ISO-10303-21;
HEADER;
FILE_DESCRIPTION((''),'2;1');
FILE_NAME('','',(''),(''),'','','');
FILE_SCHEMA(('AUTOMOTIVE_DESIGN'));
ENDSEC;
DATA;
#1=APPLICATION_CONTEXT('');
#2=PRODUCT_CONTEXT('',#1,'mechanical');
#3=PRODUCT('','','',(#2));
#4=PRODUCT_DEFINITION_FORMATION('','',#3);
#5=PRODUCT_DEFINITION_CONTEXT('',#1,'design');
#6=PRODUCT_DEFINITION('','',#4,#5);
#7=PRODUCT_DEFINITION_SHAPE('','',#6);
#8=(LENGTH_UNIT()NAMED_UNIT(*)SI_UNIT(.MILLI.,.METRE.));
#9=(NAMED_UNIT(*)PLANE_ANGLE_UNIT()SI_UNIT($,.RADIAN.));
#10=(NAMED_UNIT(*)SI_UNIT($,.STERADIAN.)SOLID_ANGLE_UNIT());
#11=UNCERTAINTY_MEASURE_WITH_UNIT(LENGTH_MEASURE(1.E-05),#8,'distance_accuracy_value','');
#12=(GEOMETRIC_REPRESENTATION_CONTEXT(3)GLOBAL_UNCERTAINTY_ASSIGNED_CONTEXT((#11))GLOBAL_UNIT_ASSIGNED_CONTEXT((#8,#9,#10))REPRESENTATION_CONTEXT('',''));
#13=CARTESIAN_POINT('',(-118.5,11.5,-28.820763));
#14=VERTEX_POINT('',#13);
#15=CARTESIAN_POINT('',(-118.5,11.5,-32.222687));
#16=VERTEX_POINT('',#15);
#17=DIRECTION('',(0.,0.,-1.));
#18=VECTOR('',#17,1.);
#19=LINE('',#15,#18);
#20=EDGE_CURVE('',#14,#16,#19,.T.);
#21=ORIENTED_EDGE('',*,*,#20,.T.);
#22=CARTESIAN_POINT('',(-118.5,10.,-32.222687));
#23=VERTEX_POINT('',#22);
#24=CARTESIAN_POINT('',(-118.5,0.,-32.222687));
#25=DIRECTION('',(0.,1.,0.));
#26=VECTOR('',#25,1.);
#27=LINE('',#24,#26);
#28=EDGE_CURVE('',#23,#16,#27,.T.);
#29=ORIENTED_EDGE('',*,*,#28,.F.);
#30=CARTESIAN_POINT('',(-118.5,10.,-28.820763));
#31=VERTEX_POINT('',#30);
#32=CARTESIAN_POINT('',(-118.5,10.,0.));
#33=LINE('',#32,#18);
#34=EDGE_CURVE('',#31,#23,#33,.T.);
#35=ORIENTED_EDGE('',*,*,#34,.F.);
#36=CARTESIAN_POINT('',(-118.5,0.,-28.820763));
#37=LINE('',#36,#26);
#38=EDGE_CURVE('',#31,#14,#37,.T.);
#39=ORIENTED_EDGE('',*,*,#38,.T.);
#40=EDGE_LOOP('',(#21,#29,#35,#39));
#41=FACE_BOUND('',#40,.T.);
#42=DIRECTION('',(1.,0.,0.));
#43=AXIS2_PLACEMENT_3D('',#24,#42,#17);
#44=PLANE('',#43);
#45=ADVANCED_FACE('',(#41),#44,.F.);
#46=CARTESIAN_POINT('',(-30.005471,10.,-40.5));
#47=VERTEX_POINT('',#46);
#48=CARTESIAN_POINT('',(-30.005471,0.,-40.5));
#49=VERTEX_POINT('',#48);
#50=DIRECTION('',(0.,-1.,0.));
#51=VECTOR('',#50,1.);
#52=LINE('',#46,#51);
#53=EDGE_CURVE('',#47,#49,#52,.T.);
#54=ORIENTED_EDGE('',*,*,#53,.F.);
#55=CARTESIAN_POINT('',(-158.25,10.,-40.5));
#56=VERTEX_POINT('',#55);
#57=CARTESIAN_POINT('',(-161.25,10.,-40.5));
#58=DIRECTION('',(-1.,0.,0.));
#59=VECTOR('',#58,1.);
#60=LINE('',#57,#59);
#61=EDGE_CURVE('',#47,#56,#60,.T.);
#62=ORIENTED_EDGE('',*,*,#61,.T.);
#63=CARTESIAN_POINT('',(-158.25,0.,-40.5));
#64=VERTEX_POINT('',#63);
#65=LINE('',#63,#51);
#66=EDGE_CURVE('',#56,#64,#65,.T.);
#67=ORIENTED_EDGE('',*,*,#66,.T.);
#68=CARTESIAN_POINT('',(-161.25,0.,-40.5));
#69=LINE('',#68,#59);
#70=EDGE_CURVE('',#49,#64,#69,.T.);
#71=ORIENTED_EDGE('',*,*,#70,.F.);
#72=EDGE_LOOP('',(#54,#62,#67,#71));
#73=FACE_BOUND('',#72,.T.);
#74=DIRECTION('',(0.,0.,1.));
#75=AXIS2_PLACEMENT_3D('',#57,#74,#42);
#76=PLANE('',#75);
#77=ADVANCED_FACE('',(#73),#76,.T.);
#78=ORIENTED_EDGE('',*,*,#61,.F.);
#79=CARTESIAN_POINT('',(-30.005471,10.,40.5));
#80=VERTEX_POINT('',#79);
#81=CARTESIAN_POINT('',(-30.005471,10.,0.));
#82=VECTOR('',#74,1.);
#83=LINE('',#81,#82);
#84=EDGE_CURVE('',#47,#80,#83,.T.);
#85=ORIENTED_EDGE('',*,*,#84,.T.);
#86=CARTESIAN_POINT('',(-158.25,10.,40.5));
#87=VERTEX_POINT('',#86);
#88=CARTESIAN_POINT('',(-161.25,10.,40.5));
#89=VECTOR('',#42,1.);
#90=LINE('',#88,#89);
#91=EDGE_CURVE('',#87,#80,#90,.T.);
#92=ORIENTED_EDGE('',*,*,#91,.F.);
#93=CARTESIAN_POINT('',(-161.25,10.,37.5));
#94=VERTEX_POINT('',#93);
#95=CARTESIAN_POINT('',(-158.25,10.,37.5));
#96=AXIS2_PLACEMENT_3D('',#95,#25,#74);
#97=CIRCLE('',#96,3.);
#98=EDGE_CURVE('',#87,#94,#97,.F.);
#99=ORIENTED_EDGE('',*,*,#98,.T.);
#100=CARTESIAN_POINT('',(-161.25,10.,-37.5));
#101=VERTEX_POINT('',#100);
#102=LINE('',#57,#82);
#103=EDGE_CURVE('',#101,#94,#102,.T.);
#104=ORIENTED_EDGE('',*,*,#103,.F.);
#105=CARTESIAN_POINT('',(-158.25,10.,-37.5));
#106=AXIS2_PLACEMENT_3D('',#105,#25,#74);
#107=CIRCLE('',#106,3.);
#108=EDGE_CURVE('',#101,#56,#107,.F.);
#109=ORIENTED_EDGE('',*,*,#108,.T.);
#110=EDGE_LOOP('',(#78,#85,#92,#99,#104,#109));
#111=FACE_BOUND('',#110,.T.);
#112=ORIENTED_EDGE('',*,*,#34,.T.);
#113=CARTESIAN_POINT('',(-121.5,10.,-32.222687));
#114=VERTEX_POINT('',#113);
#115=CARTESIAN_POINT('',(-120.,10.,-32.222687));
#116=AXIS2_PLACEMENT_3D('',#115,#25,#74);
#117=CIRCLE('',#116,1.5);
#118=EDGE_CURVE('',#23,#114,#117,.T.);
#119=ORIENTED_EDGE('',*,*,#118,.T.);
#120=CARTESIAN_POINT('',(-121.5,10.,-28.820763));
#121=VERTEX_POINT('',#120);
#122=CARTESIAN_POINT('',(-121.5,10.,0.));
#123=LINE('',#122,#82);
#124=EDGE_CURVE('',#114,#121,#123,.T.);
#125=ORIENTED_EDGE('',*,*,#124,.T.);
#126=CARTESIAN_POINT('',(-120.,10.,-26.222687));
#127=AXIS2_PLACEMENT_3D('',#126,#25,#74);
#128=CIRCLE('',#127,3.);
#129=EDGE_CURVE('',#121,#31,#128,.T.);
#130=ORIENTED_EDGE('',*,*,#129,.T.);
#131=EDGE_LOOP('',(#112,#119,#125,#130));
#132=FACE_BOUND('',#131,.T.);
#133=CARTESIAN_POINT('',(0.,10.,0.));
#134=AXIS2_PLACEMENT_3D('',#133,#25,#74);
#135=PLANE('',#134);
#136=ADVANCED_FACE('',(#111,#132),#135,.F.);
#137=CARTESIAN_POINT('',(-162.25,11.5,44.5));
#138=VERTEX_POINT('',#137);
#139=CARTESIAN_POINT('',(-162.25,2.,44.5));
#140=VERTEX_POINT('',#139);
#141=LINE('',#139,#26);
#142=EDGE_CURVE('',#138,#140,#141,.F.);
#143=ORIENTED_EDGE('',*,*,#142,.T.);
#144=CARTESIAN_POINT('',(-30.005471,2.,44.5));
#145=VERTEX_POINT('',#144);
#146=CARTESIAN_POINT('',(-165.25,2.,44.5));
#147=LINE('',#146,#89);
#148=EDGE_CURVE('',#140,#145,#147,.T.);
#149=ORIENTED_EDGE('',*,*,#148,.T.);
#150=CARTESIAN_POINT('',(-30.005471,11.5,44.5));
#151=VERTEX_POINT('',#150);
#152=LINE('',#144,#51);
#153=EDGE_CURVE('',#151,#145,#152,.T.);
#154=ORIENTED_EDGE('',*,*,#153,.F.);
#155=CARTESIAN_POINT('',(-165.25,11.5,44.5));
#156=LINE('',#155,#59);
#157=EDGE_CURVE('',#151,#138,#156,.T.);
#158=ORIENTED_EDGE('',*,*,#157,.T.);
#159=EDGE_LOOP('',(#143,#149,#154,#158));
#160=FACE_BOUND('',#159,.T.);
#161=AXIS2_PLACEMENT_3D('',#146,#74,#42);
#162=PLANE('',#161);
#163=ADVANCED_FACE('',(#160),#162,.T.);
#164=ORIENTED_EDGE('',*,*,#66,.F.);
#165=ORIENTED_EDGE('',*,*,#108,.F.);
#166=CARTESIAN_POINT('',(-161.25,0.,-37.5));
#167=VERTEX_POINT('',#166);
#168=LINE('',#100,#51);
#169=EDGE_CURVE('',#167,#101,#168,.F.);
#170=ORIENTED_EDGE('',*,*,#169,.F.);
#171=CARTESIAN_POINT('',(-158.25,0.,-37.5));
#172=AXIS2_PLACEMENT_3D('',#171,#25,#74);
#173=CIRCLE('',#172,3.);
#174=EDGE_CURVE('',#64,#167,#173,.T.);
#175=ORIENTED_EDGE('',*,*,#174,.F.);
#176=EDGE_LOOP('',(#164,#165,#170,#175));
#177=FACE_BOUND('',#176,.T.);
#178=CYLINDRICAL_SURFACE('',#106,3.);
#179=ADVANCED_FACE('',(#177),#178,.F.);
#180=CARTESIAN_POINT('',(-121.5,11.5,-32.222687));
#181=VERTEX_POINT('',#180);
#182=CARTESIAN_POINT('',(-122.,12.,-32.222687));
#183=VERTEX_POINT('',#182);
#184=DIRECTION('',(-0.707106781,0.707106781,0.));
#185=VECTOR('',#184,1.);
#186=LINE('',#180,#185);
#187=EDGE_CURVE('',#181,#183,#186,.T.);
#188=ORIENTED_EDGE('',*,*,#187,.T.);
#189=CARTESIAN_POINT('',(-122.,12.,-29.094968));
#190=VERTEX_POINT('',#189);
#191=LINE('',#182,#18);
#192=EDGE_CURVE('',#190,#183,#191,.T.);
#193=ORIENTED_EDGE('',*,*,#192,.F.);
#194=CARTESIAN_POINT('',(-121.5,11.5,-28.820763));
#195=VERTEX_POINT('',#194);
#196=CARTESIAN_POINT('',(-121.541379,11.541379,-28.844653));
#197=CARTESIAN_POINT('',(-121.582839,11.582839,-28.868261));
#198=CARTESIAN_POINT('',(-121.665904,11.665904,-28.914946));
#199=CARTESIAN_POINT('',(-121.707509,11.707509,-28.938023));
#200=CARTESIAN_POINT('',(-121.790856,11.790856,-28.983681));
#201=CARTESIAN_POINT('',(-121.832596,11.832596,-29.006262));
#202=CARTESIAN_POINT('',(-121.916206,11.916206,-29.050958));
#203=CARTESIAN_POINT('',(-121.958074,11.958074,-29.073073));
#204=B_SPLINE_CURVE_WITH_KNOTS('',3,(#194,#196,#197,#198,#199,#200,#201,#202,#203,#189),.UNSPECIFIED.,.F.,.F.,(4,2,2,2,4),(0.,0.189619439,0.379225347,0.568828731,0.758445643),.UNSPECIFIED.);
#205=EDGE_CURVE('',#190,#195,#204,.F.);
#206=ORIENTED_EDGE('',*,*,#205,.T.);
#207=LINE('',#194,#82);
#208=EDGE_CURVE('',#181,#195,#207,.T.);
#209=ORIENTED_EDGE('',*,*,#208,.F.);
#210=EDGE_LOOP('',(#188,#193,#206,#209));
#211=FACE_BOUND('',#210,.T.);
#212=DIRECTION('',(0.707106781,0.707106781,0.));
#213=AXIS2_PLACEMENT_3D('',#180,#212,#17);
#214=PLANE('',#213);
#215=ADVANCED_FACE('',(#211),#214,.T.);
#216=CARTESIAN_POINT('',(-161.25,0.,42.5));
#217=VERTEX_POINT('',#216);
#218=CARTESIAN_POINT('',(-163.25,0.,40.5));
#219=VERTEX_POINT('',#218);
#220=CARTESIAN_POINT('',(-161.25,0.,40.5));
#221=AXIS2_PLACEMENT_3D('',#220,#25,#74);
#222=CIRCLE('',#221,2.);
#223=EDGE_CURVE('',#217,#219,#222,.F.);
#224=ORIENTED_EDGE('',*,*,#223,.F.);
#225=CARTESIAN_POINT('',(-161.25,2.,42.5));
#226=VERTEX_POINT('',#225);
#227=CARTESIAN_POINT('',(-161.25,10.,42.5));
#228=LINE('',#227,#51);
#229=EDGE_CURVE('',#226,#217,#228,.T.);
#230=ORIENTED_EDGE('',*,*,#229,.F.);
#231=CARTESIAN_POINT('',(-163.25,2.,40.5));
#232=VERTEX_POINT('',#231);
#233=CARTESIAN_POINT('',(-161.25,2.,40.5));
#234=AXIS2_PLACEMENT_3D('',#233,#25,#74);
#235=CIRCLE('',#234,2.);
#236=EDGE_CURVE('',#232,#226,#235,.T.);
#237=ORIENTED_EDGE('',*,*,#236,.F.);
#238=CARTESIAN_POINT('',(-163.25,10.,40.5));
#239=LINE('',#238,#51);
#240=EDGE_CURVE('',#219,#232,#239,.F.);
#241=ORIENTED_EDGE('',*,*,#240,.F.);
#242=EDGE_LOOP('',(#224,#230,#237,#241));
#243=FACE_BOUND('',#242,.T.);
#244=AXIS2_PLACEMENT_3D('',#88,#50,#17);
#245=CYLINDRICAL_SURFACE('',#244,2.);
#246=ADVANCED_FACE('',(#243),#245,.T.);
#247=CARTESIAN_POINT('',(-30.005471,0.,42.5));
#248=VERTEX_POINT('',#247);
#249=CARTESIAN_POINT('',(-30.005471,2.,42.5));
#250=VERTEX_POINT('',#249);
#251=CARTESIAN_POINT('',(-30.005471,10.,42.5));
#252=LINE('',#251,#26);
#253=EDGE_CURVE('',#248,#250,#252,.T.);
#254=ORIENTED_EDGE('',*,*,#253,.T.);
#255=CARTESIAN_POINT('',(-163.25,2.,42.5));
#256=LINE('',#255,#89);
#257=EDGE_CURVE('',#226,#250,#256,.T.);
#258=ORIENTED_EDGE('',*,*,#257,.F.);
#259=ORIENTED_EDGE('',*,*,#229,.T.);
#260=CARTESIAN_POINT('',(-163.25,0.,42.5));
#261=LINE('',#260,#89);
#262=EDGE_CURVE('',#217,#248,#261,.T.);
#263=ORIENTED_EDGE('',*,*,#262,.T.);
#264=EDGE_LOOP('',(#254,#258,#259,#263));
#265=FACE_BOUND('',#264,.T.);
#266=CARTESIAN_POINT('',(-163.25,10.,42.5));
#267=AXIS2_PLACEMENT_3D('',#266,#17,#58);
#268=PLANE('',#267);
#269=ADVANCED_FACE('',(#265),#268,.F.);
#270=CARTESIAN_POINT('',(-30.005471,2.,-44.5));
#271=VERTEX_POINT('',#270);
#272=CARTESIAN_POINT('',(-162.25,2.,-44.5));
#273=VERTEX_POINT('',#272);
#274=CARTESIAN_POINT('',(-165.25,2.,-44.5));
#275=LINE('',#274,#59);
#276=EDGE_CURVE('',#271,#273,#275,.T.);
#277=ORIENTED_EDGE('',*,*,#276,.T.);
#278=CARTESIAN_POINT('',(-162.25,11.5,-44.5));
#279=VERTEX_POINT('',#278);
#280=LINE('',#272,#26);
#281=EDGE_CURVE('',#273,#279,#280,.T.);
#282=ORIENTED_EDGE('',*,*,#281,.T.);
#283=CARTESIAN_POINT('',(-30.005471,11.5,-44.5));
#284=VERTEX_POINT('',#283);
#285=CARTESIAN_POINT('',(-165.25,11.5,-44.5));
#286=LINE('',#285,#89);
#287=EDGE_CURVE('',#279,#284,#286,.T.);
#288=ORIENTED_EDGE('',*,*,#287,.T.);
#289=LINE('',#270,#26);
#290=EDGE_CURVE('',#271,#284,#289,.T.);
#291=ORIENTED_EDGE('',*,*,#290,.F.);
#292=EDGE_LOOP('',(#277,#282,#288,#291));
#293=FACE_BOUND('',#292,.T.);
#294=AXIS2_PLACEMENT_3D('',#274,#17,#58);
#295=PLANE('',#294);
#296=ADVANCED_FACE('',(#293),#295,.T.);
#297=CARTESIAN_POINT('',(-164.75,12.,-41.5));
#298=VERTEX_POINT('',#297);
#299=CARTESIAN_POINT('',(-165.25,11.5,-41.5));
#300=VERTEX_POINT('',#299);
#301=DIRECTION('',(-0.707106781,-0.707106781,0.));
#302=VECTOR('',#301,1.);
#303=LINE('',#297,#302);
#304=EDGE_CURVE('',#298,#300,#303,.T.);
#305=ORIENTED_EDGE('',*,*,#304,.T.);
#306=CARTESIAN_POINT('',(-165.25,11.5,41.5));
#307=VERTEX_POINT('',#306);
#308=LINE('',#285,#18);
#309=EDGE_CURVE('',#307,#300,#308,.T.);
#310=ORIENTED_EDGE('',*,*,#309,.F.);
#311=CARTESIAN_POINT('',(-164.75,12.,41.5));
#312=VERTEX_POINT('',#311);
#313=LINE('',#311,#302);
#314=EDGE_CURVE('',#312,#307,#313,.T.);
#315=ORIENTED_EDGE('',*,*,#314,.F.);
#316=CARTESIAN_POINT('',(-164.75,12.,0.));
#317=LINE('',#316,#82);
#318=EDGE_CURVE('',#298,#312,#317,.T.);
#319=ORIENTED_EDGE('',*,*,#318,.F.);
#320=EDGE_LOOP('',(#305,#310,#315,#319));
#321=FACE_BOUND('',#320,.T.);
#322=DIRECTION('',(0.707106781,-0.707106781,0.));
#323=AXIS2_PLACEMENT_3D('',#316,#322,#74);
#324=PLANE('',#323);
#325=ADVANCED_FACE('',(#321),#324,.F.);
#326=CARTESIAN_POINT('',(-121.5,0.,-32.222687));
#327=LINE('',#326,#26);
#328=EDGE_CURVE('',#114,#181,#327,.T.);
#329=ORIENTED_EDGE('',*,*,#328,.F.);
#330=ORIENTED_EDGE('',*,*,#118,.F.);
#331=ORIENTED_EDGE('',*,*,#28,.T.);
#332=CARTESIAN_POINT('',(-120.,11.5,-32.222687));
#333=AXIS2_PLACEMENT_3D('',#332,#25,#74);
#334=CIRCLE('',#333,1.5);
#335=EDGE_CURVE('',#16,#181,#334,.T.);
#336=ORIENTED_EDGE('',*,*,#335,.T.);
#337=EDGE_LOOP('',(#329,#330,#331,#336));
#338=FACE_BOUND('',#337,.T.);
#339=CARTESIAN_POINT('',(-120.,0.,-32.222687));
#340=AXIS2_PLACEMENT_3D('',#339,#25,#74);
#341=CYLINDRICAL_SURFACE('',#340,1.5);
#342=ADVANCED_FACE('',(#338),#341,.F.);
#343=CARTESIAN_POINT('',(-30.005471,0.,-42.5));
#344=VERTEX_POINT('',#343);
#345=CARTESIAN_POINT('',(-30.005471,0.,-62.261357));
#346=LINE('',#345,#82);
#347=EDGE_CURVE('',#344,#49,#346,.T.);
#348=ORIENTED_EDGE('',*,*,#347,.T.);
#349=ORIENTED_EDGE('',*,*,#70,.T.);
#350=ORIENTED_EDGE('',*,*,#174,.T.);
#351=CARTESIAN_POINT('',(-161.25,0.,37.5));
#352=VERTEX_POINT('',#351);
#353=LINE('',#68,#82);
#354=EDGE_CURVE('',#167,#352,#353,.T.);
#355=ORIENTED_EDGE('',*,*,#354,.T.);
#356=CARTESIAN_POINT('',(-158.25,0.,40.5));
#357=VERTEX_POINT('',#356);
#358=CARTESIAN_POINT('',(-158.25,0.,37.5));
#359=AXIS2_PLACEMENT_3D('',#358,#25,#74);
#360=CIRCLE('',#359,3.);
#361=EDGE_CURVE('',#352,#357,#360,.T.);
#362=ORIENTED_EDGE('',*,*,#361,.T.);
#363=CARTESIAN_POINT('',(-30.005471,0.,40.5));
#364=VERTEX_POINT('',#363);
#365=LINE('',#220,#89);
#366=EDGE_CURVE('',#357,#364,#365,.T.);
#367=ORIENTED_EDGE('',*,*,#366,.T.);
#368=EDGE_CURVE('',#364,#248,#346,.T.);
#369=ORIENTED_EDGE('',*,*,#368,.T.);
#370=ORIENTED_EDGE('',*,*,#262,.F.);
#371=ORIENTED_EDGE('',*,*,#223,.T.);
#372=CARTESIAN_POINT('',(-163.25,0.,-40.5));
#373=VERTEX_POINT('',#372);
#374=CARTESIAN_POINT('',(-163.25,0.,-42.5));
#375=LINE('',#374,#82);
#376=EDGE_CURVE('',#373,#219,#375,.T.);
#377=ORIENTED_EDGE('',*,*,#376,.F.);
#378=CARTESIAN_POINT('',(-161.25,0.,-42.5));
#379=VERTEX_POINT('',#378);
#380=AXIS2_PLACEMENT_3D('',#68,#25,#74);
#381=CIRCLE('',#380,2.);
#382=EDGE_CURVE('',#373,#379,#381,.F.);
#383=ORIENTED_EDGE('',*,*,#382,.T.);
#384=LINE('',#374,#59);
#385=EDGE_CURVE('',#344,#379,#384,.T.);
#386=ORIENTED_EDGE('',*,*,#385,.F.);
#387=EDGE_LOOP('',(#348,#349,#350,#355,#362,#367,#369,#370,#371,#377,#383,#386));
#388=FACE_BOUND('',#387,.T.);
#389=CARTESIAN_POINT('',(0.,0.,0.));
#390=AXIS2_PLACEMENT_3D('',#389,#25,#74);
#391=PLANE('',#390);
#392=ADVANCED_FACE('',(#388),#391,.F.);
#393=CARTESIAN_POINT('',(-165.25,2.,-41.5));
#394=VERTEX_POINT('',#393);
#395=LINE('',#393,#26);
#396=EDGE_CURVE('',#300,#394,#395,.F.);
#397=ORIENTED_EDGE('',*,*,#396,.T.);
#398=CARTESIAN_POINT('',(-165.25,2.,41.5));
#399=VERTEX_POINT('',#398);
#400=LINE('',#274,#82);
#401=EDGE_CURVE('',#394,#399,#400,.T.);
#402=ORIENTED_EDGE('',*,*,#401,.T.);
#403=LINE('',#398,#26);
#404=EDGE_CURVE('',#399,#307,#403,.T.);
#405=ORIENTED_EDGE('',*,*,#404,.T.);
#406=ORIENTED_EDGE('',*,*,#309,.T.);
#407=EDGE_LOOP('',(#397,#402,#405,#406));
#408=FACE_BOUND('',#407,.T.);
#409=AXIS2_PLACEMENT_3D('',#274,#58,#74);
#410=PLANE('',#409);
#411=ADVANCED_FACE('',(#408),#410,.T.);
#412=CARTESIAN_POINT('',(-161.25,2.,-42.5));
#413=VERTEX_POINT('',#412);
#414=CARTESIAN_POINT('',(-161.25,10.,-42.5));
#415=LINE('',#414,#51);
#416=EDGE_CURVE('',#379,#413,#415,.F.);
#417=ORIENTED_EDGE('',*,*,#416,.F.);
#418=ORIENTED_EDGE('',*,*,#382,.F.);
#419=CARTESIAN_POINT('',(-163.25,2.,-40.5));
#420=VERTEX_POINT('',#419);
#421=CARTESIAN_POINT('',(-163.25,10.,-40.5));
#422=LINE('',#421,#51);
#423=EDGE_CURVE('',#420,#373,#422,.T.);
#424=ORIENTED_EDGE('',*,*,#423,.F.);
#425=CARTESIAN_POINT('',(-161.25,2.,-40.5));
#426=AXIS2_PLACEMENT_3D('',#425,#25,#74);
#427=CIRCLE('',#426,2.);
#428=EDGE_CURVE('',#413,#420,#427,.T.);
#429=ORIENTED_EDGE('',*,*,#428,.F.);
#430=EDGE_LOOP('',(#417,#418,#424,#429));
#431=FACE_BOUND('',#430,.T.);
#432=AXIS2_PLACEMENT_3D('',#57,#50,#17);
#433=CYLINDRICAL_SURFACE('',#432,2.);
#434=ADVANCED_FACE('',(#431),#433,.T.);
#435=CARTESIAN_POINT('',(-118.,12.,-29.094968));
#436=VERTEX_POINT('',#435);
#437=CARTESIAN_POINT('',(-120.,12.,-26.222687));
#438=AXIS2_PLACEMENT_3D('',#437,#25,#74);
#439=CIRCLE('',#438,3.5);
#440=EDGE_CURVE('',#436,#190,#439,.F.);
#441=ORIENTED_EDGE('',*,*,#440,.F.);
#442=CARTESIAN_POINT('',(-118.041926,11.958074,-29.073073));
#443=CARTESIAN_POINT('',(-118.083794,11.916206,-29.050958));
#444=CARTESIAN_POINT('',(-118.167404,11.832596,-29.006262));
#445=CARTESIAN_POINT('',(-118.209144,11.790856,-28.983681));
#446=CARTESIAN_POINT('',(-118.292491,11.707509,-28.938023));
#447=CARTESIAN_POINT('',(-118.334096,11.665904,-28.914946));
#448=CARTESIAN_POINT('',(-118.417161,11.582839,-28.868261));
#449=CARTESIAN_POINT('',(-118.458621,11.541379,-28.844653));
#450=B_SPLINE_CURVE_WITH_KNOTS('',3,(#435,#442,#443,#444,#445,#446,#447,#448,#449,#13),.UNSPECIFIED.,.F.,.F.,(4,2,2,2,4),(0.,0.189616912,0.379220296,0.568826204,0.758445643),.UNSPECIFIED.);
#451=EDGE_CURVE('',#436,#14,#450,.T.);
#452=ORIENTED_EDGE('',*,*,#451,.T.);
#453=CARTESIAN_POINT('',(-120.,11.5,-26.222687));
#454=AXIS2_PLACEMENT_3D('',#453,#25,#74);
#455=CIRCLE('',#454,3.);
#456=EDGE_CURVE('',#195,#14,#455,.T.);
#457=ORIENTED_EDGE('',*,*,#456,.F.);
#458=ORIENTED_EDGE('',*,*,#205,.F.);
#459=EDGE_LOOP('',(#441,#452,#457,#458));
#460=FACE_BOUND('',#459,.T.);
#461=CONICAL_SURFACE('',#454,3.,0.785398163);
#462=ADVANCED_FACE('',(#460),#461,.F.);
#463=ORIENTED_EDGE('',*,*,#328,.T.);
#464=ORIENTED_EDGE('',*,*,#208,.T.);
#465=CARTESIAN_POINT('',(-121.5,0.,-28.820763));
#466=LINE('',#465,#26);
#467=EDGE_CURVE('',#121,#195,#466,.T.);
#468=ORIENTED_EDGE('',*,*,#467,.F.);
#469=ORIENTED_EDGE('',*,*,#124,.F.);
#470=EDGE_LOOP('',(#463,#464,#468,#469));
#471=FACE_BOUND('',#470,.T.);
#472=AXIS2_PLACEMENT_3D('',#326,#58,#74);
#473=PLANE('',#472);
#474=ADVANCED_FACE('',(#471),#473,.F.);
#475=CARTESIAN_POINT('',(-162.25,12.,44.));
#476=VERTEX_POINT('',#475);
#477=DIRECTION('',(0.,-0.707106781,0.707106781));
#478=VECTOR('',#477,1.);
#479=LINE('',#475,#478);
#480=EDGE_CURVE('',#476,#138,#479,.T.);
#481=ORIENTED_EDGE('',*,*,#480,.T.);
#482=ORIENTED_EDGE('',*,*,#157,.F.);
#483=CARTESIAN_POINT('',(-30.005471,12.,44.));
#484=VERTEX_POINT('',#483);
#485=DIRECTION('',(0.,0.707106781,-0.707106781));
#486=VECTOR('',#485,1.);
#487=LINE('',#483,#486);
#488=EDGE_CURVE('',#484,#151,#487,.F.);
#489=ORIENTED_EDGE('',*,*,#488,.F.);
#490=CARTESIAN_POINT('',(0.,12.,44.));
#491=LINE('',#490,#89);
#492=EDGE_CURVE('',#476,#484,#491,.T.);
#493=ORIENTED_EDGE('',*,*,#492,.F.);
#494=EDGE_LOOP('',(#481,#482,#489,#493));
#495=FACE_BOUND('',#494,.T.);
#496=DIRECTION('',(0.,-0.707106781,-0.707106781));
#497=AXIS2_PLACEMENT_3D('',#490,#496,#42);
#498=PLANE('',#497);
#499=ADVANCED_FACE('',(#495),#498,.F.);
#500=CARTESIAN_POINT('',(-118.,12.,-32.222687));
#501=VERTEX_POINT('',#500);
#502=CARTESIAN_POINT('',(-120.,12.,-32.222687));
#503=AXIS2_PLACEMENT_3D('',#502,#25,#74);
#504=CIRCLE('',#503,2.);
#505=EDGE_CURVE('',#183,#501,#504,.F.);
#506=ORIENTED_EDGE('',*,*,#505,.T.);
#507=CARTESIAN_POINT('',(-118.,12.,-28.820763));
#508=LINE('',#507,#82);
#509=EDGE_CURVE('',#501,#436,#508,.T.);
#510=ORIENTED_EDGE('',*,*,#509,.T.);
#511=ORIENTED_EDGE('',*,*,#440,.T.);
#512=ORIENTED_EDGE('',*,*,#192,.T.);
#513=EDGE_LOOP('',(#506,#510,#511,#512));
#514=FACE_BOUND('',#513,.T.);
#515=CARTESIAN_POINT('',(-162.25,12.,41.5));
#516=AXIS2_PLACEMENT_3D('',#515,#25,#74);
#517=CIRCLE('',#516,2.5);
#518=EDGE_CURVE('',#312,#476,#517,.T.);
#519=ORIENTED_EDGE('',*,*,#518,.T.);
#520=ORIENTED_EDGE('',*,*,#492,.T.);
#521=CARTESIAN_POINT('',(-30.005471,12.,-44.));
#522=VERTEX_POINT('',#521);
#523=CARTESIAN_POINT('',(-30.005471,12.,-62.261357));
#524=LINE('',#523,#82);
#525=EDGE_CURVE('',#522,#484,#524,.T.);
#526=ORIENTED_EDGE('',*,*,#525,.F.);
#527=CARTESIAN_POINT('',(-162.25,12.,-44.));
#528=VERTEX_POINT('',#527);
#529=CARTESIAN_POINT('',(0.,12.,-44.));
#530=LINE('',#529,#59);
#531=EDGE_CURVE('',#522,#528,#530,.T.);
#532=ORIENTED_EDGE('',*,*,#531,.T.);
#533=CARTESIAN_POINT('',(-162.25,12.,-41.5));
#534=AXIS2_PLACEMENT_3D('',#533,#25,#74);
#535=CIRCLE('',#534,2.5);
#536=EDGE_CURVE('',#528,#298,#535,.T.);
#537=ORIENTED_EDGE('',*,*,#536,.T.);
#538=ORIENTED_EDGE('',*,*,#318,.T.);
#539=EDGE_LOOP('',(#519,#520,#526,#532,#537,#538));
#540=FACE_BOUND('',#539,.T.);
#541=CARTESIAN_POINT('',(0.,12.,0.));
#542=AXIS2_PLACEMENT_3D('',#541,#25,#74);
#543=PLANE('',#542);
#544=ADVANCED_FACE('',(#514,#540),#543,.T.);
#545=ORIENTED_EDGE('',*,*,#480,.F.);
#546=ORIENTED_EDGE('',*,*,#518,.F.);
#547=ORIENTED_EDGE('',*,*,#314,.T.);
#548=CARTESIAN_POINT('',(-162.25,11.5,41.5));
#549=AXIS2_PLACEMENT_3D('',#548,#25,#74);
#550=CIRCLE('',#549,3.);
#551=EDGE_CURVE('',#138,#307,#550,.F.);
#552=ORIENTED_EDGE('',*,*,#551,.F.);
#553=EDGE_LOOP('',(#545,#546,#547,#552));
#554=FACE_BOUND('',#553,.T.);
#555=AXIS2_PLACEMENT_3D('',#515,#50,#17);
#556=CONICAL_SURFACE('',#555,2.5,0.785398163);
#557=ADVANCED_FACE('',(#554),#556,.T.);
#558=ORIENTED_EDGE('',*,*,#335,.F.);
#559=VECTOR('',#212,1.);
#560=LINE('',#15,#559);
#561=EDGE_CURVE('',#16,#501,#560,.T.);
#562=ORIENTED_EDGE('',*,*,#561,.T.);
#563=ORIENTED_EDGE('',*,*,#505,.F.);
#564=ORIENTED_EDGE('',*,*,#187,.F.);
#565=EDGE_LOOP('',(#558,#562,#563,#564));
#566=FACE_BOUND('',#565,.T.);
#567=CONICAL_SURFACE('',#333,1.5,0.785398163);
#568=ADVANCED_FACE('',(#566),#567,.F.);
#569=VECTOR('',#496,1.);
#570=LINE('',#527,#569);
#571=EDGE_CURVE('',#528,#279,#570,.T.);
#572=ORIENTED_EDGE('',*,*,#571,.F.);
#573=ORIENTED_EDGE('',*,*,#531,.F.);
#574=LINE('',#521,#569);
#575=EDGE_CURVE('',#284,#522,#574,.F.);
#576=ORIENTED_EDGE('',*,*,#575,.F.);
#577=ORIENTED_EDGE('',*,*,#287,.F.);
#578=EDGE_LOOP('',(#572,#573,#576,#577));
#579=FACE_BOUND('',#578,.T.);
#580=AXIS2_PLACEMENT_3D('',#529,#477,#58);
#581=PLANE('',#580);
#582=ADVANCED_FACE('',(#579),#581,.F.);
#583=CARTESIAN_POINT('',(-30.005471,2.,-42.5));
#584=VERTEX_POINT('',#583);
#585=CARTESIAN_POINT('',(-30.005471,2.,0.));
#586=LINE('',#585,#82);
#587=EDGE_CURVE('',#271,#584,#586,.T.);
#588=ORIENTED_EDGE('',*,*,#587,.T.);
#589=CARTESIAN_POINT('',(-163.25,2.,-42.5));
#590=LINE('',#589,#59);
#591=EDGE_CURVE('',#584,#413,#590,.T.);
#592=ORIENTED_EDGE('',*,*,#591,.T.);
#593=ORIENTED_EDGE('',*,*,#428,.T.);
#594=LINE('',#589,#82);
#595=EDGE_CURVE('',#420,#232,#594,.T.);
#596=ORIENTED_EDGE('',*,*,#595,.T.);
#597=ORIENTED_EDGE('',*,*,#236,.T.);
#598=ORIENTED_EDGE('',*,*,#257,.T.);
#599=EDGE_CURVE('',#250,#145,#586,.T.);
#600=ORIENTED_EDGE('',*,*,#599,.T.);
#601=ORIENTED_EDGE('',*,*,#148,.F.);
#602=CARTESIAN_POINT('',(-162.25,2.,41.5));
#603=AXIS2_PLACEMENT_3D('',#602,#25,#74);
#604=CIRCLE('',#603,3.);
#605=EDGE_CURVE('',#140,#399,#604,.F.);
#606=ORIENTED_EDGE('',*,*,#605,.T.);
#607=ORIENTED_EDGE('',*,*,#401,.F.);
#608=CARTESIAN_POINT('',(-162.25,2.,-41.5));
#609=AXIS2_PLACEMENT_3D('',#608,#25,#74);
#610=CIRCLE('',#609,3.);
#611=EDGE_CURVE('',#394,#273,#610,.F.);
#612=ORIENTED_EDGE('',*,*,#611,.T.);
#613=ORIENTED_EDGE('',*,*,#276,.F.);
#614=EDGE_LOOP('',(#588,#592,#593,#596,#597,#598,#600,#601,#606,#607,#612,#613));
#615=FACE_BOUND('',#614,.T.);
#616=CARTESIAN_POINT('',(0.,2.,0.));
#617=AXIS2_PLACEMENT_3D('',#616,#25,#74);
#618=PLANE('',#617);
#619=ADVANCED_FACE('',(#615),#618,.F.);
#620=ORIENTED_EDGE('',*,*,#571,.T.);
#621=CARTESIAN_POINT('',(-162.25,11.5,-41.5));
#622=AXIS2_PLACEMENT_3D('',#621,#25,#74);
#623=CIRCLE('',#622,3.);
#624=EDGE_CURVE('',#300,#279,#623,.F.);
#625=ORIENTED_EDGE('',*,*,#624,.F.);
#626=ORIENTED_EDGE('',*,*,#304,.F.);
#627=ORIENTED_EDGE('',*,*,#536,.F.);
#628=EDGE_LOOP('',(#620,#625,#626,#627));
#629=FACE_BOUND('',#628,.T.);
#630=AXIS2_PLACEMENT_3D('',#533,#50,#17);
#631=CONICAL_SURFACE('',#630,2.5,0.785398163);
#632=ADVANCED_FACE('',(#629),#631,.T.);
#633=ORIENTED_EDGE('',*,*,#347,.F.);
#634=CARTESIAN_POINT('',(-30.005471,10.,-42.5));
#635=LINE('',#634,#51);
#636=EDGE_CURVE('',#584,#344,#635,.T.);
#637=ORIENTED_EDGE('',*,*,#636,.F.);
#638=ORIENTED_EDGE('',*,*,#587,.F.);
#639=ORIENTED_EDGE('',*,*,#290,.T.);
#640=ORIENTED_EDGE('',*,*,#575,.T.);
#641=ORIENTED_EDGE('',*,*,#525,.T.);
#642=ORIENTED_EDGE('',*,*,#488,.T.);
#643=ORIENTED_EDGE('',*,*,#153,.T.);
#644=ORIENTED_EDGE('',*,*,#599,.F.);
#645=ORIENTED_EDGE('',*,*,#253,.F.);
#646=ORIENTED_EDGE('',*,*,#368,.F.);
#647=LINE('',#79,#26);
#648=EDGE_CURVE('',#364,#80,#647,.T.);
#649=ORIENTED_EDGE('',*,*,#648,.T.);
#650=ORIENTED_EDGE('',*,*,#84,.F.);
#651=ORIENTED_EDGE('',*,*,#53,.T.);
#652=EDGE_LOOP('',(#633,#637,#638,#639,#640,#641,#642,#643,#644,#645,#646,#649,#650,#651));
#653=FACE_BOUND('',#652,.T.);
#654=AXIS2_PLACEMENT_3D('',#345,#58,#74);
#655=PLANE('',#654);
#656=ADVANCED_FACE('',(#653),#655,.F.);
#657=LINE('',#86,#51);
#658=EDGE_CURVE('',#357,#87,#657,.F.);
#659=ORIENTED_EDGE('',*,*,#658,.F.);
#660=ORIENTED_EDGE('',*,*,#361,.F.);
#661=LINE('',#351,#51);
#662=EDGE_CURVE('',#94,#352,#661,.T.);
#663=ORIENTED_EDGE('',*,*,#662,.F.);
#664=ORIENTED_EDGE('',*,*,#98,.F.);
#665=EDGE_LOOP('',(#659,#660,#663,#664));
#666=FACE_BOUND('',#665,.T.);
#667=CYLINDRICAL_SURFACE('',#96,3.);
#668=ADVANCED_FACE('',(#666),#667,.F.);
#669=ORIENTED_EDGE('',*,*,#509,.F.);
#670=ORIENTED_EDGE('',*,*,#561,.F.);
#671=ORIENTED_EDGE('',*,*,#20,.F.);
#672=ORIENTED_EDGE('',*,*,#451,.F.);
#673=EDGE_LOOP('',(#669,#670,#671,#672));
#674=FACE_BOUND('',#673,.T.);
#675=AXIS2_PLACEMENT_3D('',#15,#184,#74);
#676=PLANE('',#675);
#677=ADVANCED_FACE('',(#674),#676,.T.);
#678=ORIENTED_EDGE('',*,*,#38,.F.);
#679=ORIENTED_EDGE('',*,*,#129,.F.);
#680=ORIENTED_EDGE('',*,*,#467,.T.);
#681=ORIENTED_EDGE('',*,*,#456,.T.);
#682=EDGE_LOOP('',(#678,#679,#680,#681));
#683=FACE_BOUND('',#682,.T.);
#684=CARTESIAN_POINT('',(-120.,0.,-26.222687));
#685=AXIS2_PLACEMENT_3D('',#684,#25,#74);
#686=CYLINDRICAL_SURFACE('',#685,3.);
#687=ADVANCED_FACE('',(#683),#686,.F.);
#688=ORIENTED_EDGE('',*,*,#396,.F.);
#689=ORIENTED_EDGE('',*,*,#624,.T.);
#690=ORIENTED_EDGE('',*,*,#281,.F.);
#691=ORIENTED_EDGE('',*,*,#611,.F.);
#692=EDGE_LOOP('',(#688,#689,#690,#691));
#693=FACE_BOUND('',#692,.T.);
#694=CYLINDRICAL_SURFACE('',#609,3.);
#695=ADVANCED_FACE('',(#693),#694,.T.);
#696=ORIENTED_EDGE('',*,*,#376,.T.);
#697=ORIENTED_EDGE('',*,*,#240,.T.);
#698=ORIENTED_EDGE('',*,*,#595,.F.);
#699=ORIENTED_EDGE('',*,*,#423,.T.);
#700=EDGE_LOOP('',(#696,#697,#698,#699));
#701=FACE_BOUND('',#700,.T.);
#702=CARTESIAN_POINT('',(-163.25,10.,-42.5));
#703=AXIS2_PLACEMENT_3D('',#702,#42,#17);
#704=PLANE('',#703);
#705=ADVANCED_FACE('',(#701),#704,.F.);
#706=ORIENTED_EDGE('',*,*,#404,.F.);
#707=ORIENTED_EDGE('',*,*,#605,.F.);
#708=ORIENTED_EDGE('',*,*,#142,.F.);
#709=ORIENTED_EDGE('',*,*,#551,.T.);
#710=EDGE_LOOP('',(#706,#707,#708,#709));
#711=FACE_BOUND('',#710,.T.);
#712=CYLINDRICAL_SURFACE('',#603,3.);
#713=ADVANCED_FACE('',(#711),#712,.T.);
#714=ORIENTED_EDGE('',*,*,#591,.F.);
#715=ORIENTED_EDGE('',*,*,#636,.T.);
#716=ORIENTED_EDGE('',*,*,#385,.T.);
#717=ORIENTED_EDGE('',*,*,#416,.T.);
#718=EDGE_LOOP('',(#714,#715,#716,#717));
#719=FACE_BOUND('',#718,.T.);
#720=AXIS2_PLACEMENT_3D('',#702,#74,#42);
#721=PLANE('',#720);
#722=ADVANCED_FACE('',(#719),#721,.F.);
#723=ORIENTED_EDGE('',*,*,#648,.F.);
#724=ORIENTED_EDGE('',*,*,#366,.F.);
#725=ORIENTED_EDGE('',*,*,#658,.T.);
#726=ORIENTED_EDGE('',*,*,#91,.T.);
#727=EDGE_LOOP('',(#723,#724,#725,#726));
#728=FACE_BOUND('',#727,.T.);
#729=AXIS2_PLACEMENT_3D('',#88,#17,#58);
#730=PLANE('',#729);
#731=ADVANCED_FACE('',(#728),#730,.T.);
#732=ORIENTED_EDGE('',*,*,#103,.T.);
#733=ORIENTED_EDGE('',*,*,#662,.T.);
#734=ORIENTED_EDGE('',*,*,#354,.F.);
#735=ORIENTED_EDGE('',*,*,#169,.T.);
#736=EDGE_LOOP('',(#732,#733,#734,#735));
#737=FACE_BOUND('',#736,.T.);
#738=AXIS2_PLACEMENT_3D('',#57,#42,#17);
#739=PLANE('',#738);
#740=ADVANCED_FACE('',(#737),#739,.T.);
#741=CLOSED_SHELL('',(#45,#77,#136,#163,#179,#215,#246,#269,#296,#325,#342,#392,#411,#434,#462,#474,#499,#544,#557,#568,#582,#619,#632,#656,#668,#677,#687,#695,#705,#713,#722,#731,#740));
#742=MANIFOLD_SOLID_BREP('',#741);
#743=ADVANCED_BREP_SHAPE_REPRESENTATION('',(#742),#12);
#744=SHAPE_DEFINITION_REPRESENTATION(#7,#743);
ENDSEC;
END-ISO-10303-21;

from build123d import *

# Parameters (mm, degrees)
SKETCH1_W           = 326.5
SKETCH1_H           = 85
SKETCH1_W_2         = 322.5
SKETCH1_H_2         = 81
BOSS_EXTRUDE1_DEPTH = 10
SKETCH2_W           = 330.5
SKETCH2_H           = 89
SKETCH2_W_2         = 322.5
SKETCH2_H_2         = 81
BOSS_EXTRUDE2_DEPTH = 8
SKETCH3_W           = 330.5
SKETCH3_H           = 89
BOSS_EXTRUDE3_DEPTH = 2
FILLET1_R           = 3
FILLET2_R           = 2
FILLET3_R           = 3
CHAMFER1_SIZE       = 0.5
CUT_EXTRUDE1_DEPTH  = 172.557024047
CHAMFER2_SIZE       = 0.5
SKETCH7_W           = 40
SKETCH7_H           = 6.166023439
CUT_EXTRUDE3_DEPTH  = 189.075948755
BOSS_EXTRUDE4_REACH = 190.076
FILLET4_R           = 2
CHAMFER3_SIZE       = 0.5
FILLET5_R           = 3
FILLET6_R           = 2
SKETCH9_R           = 16.25
SKETCH9_R_2         = 14.25
BOSS_EXTRUDE5_DEPTH = 3
SKETCH10_R          = 1.5
SKETCH10_R_2        = 2
SKETCH10_R_3        = 2.25
CUT_EXTRUDE4_DEPTH  = 172.279924393
CHAMFER4_SIZE       = 0.5
SKETCH12_W          = 30.6
SKETCH12_H          = 39
SKETCH12_W_2        = 26.6
SKETCH12_H_2        = 35
BOSS_EXTRUDE6_DEPTH = 6
SKETCH13_W          = 30.6
SKETCH13_H          = 4
BOSS_EXTRUDE7_DEPTH = 2.7
SKETCH14_W          = 3.373769955
SKETCH14_H          = 15.899358316
SKETCH14_W_2        = 15.312861043
SKETCH14_H_2        = 6.106571476
SKETCH14_W_3        = 6.70369678
SKETCH14_H_3        = 18.082973575
CUT_EXTRUDE5_DEPTH  = 6
FILLET7_R           = 2
CUT_EXTRUDE6_DEPTH  = 12.7
CUT_EXTRUDE7_DEPTH  = 12.7
CUT_EXTRUDE8_DEPTH  = 12.7
SKETCH19_W          = 25
SKETCH19_H          = 25.3
SKETCH19_W_2        = 21
SKETCH19_H_2        = 21.3
BOSS_EXTRUDE8_DEPTH = 6
SKETCH20_W          = 17
SKETCH20_H          = 11.292116592
CUT_EXTRUDE9_DEPTH  = 6
FILLET8_R           = 2
FILLET9_R           = 2
FILLET10_R          = 1
SKETCH18_W          = 231.079625222
SKETCH18_H          = 131.716143141
CUT_EXTRUDE11_DEPTH = 172.557024047


# Some blends are built 0.0001 mm under size
with BuildPart() as part:
    # Sketch1 → Boss-Extrude1 (new body)
    with BuildSketch(Plane(origin=(0, 0, 0), x_dir=(1, 0, 0), z_dir=(0, 1, 0))):
        Rectangle(SKETCH1_W, SKETCH1_H)
        Rectangle(SKETCH1_W_2, SKETCH1_H_2, mode=Mode.SUBTRACT)
    extrude(amount=BOSS_EXTRUDE1_DEPTH)

    # Sketch2 → Boss-Extrude2 (add)
    with BuildSketch(Plane(origin=(0, 10, 0), x_dir=(1, 0, 0), z_dir=(0, 1, 0))):
        Rectangle(SKETCH2_W, SKETCH2_H)
        Rectangle(SKETCH2_W_2, SKETCH2_H_2, mode=Mode.SUBTRACT)
    extrude(amount=-BOSS_EXTRUDE2_DEPTH)

    # Sketch3 → Boss-Extrude3 (add)
    with BuildSketch(Plane(origin=(0, 10, 0), x_dir=(1, 0, 0), z_dir=(0, 1, 0))):
        Rectangle(SKETCH3_W, SKETCH3_H)
    extrude(amount=BOSS_EXTRUDE3_DEPTH)

    # Fillet1
    fillet1_edges = [part.edges().sort_by_distance(p)[0] for p in [
        (161.25, 5, 40.5),
        (161.25, 5, -40.5),
        (-161.25, 5, -40.5),
        (-161.25, 5, 40.5),
    ]]
    fillet(fillet1_edges, radius=FILLET1_R)

    # Fillet2
    fillet2_edges = [part.edges().sort_by_distance(p)[0] for p in [
        (163.25, 1, 42.5),
        (-163.25, 1, 42.5),
        (-163.25, 1, -42.5),
        (163.25, 1, -42.5),
    ]]
    fillet(fillet2_edges, radius=FILLET2_R)

    # Fillet3
    fillet3_edges = [part.edges().sort_by_distance(p)[0] for p in [
        (165.25, 7, -44.5),
        (165.25, 7, 44.5),
        (-165.25, 7, 44.5),
        (-165.25, 7, -44.5),
    ]]
    fillet(fillet3_edges, radius=FILLET3_R)

    # Chamfer1
    chamfer1_edges = [part.edges().sort_by_distance(p)[0] for p in [
        (165.25, 12, 0),
        (-165.25, 12, 0),
        (0, 12, 44.5),
        (0, 12, -44.5),
        (-164.371320344, 12, -43.621320344),
        (-164.371320344, 12, 43.621320344),
        (164.371320344, 12, 43.621320344),
        (164.371320344, 12, -43.621320344),
    ]]
    chamfer(chamfer1_edges, length=CHAMFER1_SIZE)

    # Sketch4 → Cut-Extrude1 (cut, through all)
    with BuildSketch(Plane(origin=(0, 12, 0), x_dir=(1, 0, 0), z_dir=(0, 1, 0))):
        with BuildLine():
            Line((-121.5, 32.222687085), (-121.5, 28.820763297))
            ThreePointArc((-121.5, 28.820763297), (-120, 23.222687085), (-118.5, 28.820763297))
            Line((-118.5, 28.820763297), (-118.5, 32.222687085))
            ThreePointArc((-118.5, 32.222687085), (-120, 33.722687085), (-121.5, 32.222687085))
        make_face()
        with BuildLine():
            Line((118.5, 32.222687085), (118.5, 28.820763297))
            ThreePointArc((118.5, 28.820763297), (120, 23.222687085), (121.5, 28.820763297))
            Line((121.5, 28.820763297), (121.5, 32.222687085))
            ThreePointArc((121.5, 32.222687085), (120, 33.722687085), (118.5, 32.222687085))
        make_face()
    extrude(amount=-CUT_EXTRUDE1_DEPTH, mode=Mode.SUBTRACT)

    # Chamfer2
    chamfer2_edges = [part.edges().sort_by_distance(p)[0] for p in [
        (-120, 12, -33.722687085),
        (-121.5, 12, -30.521725191),
        (-120, 12, -23.222687085),
        (-118.5, 12, -30.521725191),
        (120, 12, -33.722687085),
        (118.5, 12, -30.521725191),
        (120, 12, -23.222687085),
        (121.5, 12, -30.521725191),
    ]]
    chamfer(chamfer2_edges, length=CHAMFER2_SIZE)

    # Sketch7 → Cut-Extrude3 (cut, through all)
    with BuildSketch(Plane(origin=(0, 0, -44.5), x_dir=(-1, 0, 0), z_dir=(0, 0, -1))):
        with Locations((0, 12.083011719)):
            Rectangle(SKETCH7_W, SKETCH7_H)
    extrude(amount=-CUT_EXTRUDE3_DEPTH, mode=Mode.SUBTRACT)

    # Boss-Extrude4: up to this face of the body (flat: up to its plane)
    boss_extrude4_end = Plane(part.part.faces().sort_by_distance((0, 6.63265862, 44.5))[0])
    # Sketch8 → Boss-Extrude4 (add, up to the picked face)
    with BuildSketch(Plane(origin=(0, 0, -44.5), x_dir=(-1, 0, 0), z_dir=(0, 0, -1)), mode=Mode.PRIVATE) as boss_extrude4_sk1:
        Polygon((-20, 12), (-20, 9), (20, 9), (20, 12), (22, 12), (22, 7), (-22, 7), (-22, 12), align=None)
    boss_extrude4_tool1 = split(extrude(boss_extrude4_sk1.sketch, amount=-BOSS_EXTRUDE4_REACH, mode=Mode.PRIVATE), bisect_by=boss_extrude4_end, keep=Keep.BOTH, mode=Mode.PRIVATE)
    add(boss_extrude4_tool1.solids().sort_by(Axis((0, 8.3, -44.5), (0, 0, 1)))[0])

    # Fillet4
    fillet4_edges = [part.edges().sort_by_distance(p)[0] for p in [
        (-20, 9, 0),
        (20, 9, 0),
    ]]
    fillet(fillet4_edges, radius=FILLET4_R)

    # Chamfer3
    # the kernel refuses this chamfer: 0.5 mm, written as the material it takes off along each edge
    with BuildSketch(Plane(origin=(22, 10.214158506, 44.5), x_dir=(-0.999621916911297, -2.130822274703722e-15, 0.027495876610582105), z_dir=(0, 1, 0))) as chamfer3_piece_1_section:
        Polygon((CHAMFER3_SIZE * 0.999621916911, -CHAMFER3_SIZE * 0.0274958766106), (-CHAMFER3_SIZE * 0.0274958766106, -CHAMFER3_SIZE * 0.999621916911), (0, 0), align=None)
    chamfer3_piece_1 = extrude(amount=3.071682988, mode=Mode.PRIVATE)
    chamfer3_piece_1 = split(chamfer3_piece_1, bisect_by=Plane(origin=(21.8125, 11.71875, 44.28125), z_dir=(0, 0.7071067811865476, 0.7071067811865476)), keep=Keep.TOP, mode=Mode.PRIVATE)
    add(chamfer3_piece_1, mode=Mode.SUBTRACT)
    with BuildSketch(Plane(origin=(-22, 12, -45.785841494), x_dir=(0.9996219169112968, 0.02749587661058555, 0), z_dir=(0, 0, 1))) as chamfer3_piece_2_section:
        Polygon((CHAMFER3_SIZE * 0.999621916911, -CHAMFER3_SIZE * 0.0274958766106), (-CHAMFER3_SIZE * 0.0274958766106, -CHAMFER3_SIZE * 0.999621916911), (0, 0), align=None)
    chamfer3_piece_2 = extrude(amount=3.071682988, mode=Mode.PRIVATE)
    chamfer3_piece_2 = split(chamfer3_piece_2, bisect_by=Plane(origin=(-21.8125, 11.78125, -44.21875), z_dir=(0, 0.7071067811865476, -0.7071067811865476)), keep=Keep.TOP, mode=Mode.PRIVATE)
    add(chamfer3_piece_2, mode=Mode.SUBTRACT)
    with BuildSketch(Plane(origin=(22, 12, -45.785841494), x_dir=(-0.9996219169112968, 0.02749587661058555, 0), z_dir=(0, 0, 1))) as chamfer3_piece_3_section:
        Polygon((CHAMFER3_SIZE * 0.999621916911, CHAMFER3_SIZE * 0.0274958766106), (-CHAMFER3_SIZE * 0.0274958766106, CHAMFER3_SIZE * 0.999621916911), (0, 0), align=None)
    chamfer3_piece_3 = extrude(amount=3.071682988, mode=Mode.PRIVATE)
    chamfer3_piece_3 = split(chamfer3_piece_3, bisect_by=Plane(origin=(21.8125, 11.78125, -44.21875), z_dir=(0, 0.7071067811865476, -0.7071067811865476)), keep=Keep.TOP, mode=Mode.PRIVATE)
    add(chamfer3_piece_3, mode=Mode.SUBTRACT)
    with BuildSketch(Plane(origin=(23.285841494, 12, -44.5), x_dir=(0, -0.999621916911297, -0.0274958766105822), z_dir=(-1, 0, 0)), Plane(origin=(-18.714158506, 12, -44.5), x_dir=(0, -0.999621916911297, -0.0274958766105822), z_dir=(-1, 0, 0)), Plane(origin=(-18.714158506, 12, 44.5), x_dir=(0, 0.02749587661058574, -0.9996219169112968), z_dir=(-1, 0, 0))) as chamfer3_piece_4:
        Polygon((CHAMFER3_SIZE * 0.999621916911, CHAMFER3_SIZE * 0.0274958766106), (-CHAMFER3_SIZE * 0.0274958766106, CHAMFER3_SIZE * 0.999621916911), (0, 0), align=None)
    extrude(amount=4.571682988, mode=Mode.SUBTRACT)
    with BuildSketch(Plane(origin=(22, 10.214158506, -44.5), x_dir=(-0.999621916911297, -2.130822274703722e-15, -0.027495876610582105), z_dir=(0, 1, 0))) as chamfer3_piece_5_section:
        Polygon((CHAMFER3_SIZE * 0.999621916911, CHAMFER3_SIZE * 0.0274958766106), (-CHAMFER3_SIZE * 0.0274958766106, CHAMFER3_SIZE * 0.999621916911), (0, 0), align=None)
    chamfer3_piece_5 = extrude(amount=3.071682988, mode=Mode.PRIVATE)
    chamfer3_piece_5 = split(chamfer3_piece_5, bisect_by=Plane(origin=(21.8125, 11.71875, -44.28125), z_dir=(0, 0.7071067811865476, -0.7071067811865476)), keep=Keep.TOP, mode=Mode.PRIVATE)
    add(chamfer3_piece_5, mode=Mode.SUBTRACT)
    with BuildSketch(Plane(origin=(-22, 13.285841494, -44.5), x_dir=(0.999621916911297, 0, -0.027495876610582105), z_dir=(0, -1, 0))) as chamfer3_piece_6_section:
        Polygon((CHAMFER3_SIZE * 0.999621916911, CHAMFER3_SIZE * 0.0274958766106), (-CHAMFER3_SIZE * 0.0274958766106, CHAMFER3_SIZE * 0.999621916911), (0, 0), align=None)
    chamfer3_piece_6 = extrude(amount=3.071682988, mode=Mode.PRIVATE)
    chamfer3_piece_6 = split(chamfer3_piece_6, bisect_by=Plane(origin=(-21.8125, 11.71875, -44.28125), z_dir=(0, 0.7071067811865476, -0.7071067811865476)), keep=Keep.TOP, mode=Mode.PRIVATE)
    add(chamfer3_piece_6, mode=Mode.SUBTRACT)
    with BuildSketch(Plane(origin=(-22, 12, 42.714158506), x_dir=(0.9996219169112968, 0.02749587661058555, 0), z_dir=(0, 0, 1))) as chamfer3_piece_7_section:
        Polygon((CHAMFER3_SIZE * 0.999621916911, -CHAMFER3_SIZE * 0.0274958766106), (-CHAMFER3_SIZE * 0.0274958766106, -CHAMFER3_SIZE * 0.999621916911), (0, 0), align=None)
    chamfer3_piece_7 = extrude(amount=3.071682988, mode=Mode.PRIVATE)
    chamfer3_piece_7 = split(chamfer3_piece_7, bisect_by=Plane(origin=(-21.8125, 11.78125, 44.21875), z_dir=(0, 0.7071067811865476, 0.7071067811865476)), keep=Keep.TOP, mode=Mode.PRIVATE)
    add(chamfer3_piece_7, mode=Mode.SUBTRACT)
    with BuildSketch(Plane(origin=(-22, 13.285841494, 44.5), x_dir=(0.999621916911297, 0, 0.027495876610582105), z_dir=(0, -1, 0))) as chamfer3_piece_8_section:
        Polygon((CHAMFER3_SIZE * 0.999621916911, -CHAMFER3_SIZE * 0.0274958766106), (-CHAMFER3_SIZE * 0.0274958766106, -CHAMFER3_SIZE * 0.999621916911), (0, 0), align=None)
    chamfer3_piece_8 = extrude(amount=3.071682988, mode=Mode.PRIVATE)
    chamfer3_piece_8 = split(chamfer3_piece_8, bisect_by=Plane(origin=(-21.8125, 11.71875, 44.28125), z_dir=(0, 0.7071067811865476, 0.7071067811865476)), keep=Keep.TOP, mode=Mode.PRIVATE)
    add(chamfer3_piece_8, mode=Mode.SUBTRACT)
    with BuildSketch(Plane(origin=(22, 12, 42.714158506), x_dir=(-0.9996219169112968, 0.02749587661058555, 0), z_dir=(0, 0, 1))) as chamfer3_piece_9_section:
        Polygon((CHAMFER3_SIZE * 0.999621916911, CHAMFER3_SIZE * 0.0274958766106), (-CHAMFER3_SIZE * 0.0274958766106, CHAMFER3_SIZE * 0.999621916911), (0, 0), align=None)
    chamfer3_piece_9 = extrude(amount=3.071682988, mode=Mode.PRIVATE)
    chamfer3_piece_9 = split(chamfer3_piece_9, bisect_by=Plane(origin=(21.8125, 11.78125, 44.21875), z_dir=(0, 0.7071067811865476, 0.7071067811865476)), keep=Keep.TOP, mode=Mode.PRIVATE)
    add(chamfer3_piece_9, mode=Mode.SUBTRACT)
    with BuildSketch(Plane(origin=(23.285841494, 12, 44.5), x_dir=(0, -0.999621916911297, 0.0274958766105822), z_dir=(-1, 0, 0))) as chamfer3_piece_10:
        Polygon((CHAMFER3_SIZE * 0.999621916911, -CHAMFER3_SIZE * 0.0274958766106), (-CHAMFER3_SIZE * 0.0274958766106, -CHAMFER3_SIZE * 0.999621916911), (0, 0), align=None)
    extrude(amount=4.571682988, mode=Mode.SUBTRACT)

    # Fillet5
    fillet5_edges = [part.edges().sort_by_distance(p)[0] for p in [
        (20, 11.25, 44.5),
        (19.414213562, 9.585786438, 44.5),
        (-20, 11.25, 44.5),
        (-19.414213562, 9.585786438, 44.5),
        (20, 11.25, -44.5),
        (19.414213562, 9.585786438, -44.5),
        (-20, 11.25, -44.5),
        (-19.414213562, 9.585786438, -44.5),
        (0, 9, -44.5),
        (0, 9, 44.5),
    ]]
    fillet(fillet5_edges, radius=FILLET5_R)

    # Fillet6
    fillet6_edges = [part.edges().sort_by_distance(p)[0] for p in [
        (22, 10, 0),
        (-22, 10, 0),
    ]]
    fillet(fillet6_edges, radius=FILLET6_R)

    # Sketch9 → Boss-Extrude5 (add)
    with BuildSketch(Plane.XZ.offset(-7)):
        Circle(SKETCH9_R)
        Circle(SKETCH9_R_2, mode=Mode.SUBTRACT)
    extrude(amount=BOSS_EXTRUDE5_DEPTH)

    # Sketch10 → Cut-Extrude4 (cut, through all)
    with BuildSketch(Plane.XZ.offset(-7)):
        with Locations((0, 3)):
            Circle(SKETCH10_R)
        with Locations((0, 7)):
            Circle(SKETCH10_R_2)
        with Locations((0, 12)):
            Circle(SKETCH10_R_3)
        with Locations((4.499513268, 5.362311102)):
            Circle(SKETCH10_R_2)
        with Locations((6.893654271, 1.215537244)):
            Circle(SKETCH10_R_2)
        with Locations((6.062177826, -3.5)):
            Circle(SKETCH10_R_2)
        with Locations((2.394141003, -6.577848346)):
            Circle(SKETCH10_R_2)
        with Locations((-2.394141003, -6.577848346)):
            Circle(SKETCH10_R_2)
        with Locations((-6.062177826, -3.5)):
            Circle(SKETCH10_R_2)
        with Locations((-6.893654271, 1.215537244)):
            Circle(SKETCH10_R_2)
        with Locations((-4.499513268, 5.362311102)):
            Circle(SKETCH10_R_2)
        with Locations((3, 0)):
            Circle(SKETCH10_R)
        with Locations((0, -3)):
            Circle(SKETCH10_R)
        with Locations((-3, 0)):
            Circle(SKETCH10_R)
        with Locations((5.576678065, 10.625472308)):
            Circle(SKETCH10_R_3)
        with Locations((9.875806391, 6.816776961)):
            Circle(SKETCH10_R_3)
        with Locations((11.912506489, 1.446440163)):
            Circle(SKETCH10_R_3)
        with Locations((11.220194912, -4.255258645)):
            Circle(SKETCH10_R_3)
        with Locations((7.957471899, -8.982128978)):
            Circle(SKETCH10_R_3)
        with Locations((2.871787971, -11.651301809)):
            Circle(SKETCH10_R_3)
        with Locations((-2.871787971, -11.651301809)):
            Circle(SKETCH10_R_3)
        with Locations((-7.957471899, -8.982128978)):
            Circle(SKETCH10_R_3)
        with Locations((-11.220194912, -4.255258645)):
            Circle(SKETCH10_R_3)
        with Locations((-11.912506489, 1.446440163)):
            Circle(SKETCH10_R_3)
        with Locations((-9.875806391, 6.816776961)):
            Circle(SKETCH10_R_3)
        with Locations((-5.576678065, 10.625472308)):
            Circle(SKETCH10_R_3)
    extrude(amount=-CUT_EXTRUDE4_DEPTH, mode=Mode.SUBTRACT)

    # Chamfer4
    chamfer4_edges = [part.edges().sort_by_distance(p)[0] for p in [
        (20, 12, 0),
        (20.356617963, 12, -42.918637165),
        (20.356617963, 12, 42.918637165),
        (-20, 12, 0),
        (-20.356617963, 12, -42.918637165),
        (-20.356617963, 12, 42.918637165),
    ]]
    chamfer(chamfer4_edges, length=CHAMFER4_SIZE - 0.0001)  # a hair under: the kernel refuses the full size

    # Sketch12 → Boss-Extrude6 (add)
    with BuildSketch(Plane.XZ.offset(-10)):
        with Locations((142.95, 3)):
            Rectangle(SKETCH12_W, SKETCH12_H)
        with Locations((142.95, 3)):
            Rectangle(SKETCH12_W_2, SKETCH12_H_2, mode=Mode.SUBTRACT)
    extrude(amount=BOSS_EXTRUDE6_DEPTH)

    # Sketch13 → Boss-Extrude7 (add)
    with BuildSketch(Plane.XZ.offset(-10)):
        with Locations((142.95, -14.5)):
            Rectangle(SKETCH13_W, SKETCH13_H)
    extrude(amount=BOSS_EXTRUDE7_DEPTH)

    # Sketch14 → Cut-Extrude5 (cut)
    with BuildSketch(Plane.XZ.offset(-4)):
        with Locations((157.936884978, 16.074384573)):
            Rectangle(SKETCH14_W, SKETCH14_H)
        with Locations((143.337214565, 21.464137582)):
            Rectangle(SKETCH14_W_2, SKETCH14_H_2)
        with Locations((129.195604024, 2.873540073)):
            Rectangle(SKETCH14_W_3, SKETCH14_H_3)
    extrude(amount=-CUT_EXTRUDE5_DEPTH, mode=Mode.SUBTRACT)

    # Fillet7
    fillet7_edges = [part.edges().sort_by_distance(p)[0] for p in [
        (150.993645086, 7, 20.5),
        (135.680784043, 7, 20.5),
        (129.65, 7, 11.91502686),
        (156.25, 7, 8.124705415),
        (129.65, 7, -6.167946715),
    ]]
    fillet(fillet7_edges, radius=FILLET7_R - 0.0001)  # a hair under: the kernel refuses the full size

    # Sketch15 → Cut-Extrude6 (cut)
    with BuildSketch(Plane.XY.offset(-40.5)):
        with BuildLine():
            Line((142.732418969, 8.83308219), (145.68707631, 8.83308219))
            ThreePointArc((145.68707631, 8.83308219), (146.85974764, 6.63308219), (145.68707631, 4.43308219))
            Line((145.68707631, 4.43308219), (142.732418969, 4.43308219))
            ThreePointArc((142.732418969, 4.43308219), (141.55974764, 6.63308219), (142.732418969, 8.83308219))
        make_face()
    extrude(amount=-CUT_EXTRUDE6_DEPTH, mode=Mode.SUBTRACT)

    # Sketch16 → Cut-Extrude7 (cut)
    with BuildSketch(Plane(origin=(0, 0, 40.5), x_dir=(-1, 0, 0), z_dir=(0, 0, -1))):
        with BuildLine():
            Line((-146.114315764, 9.98869973), (-139.089315764, 9.98869973))
            ThreePointArc((-139.089315764, 9.98869973), (-134.714315764, 5.61369973), (-139.089315764, 1.23869973))
            Line((-139.089315764, 1.23869973), (-146.114315764, 1.23869973))
            Line((-146.114315764, 1.23869973), (-146.114315764, 5.61369973))
            Line((-146.114315764, 5.61369973), (-146.114315764, 9.98869973))
        make_face()
    extrude(amount=-CUT_EXTRUDE7_DEPTH, mode=Mode.SUBTRACT)

    # Sketch17 → Cut-Extrude8 (cut)
    with BuildSketch(Plane.XY.offset(44.5)):
        Polygon((136.623185341, 2), (146.114315764, 4.571516723), (146.114315764, -5.033546584), (136.623185341, -4.403350122), align=None)
    extrude(amount=-CUT_EXTRUDE8_DEPTH, mode=Mode.SUBTRACT)

    # Sketch19 → Boss-Extrude8 (add)
    with BuildSketch(Plane.XZ.offset(-10)):
        with Locations((48.241330984, -14.734055582)):
            Rectangle(SKETCH19_W, SKETCH19_H)
        with Locations((48.241330984, -14.734055582)):
            Rectangle(SKETCH19_W_2, SKETCH19_H_2, mode=Mode.SUBTRACT)
    extrude(amount=BOSS_EXTRUDE8_DEPTH)

    # Sketch20 → Cut-Extrude9 (cut)
    with BuildSketch(Plane.XZ.offset(-4)):
        with Locations((48.241330984, -27.384055582)):
            Rectangle(SKETCH20_W, SKETCH20_H)
    extrude(amount=-CUT_EXTRUDE9_DEPTH, mode=Mode.SUBTRACT)

    # Fillet8
    fillet8_edges = [part.edges().sort_by_distance(p)[0] for p in [
        (39.741330984, 7, -25.384055582),
        (56.741330984, 7, -25.384055582),
    ]]
    fillet(fillet8_edges, radius=FILLET8_R - 0.0001)  # a hair under: the kernel refuses the full size

    # Fillet9
    fillet9_edges = [part.edges().sort_by_distance(p)[0] for p in [
        (60.741330984, 7, -2.084055582),
        (35.741330984, 7, -2.084055582),
        (158.25, 7, -16.5),
        (127.65, 7, 22.5),
        (127.65, 7, -16.5),
    ]]
    fillet(fillet9_edges, radius=FILLET9_R)

    # Fillet10
    fillet10_edges = [part.edges().sort_by_distance(p)[0] for p in [
        (-16.25, 4, 0),
        (-16.25, 7, 0),
        (-14.25, 4, 0),
    ]]
    fillet(fillet10_edges, radius=FILLET10_R - 0.0001)  # a hair under: the kernel refuses the full size

    # Sketch18 → Cut-Extrude11 (cut, through all)
    with BuildSketch(Plane(origin=(0, 12, 0), x_dir=(1, 0, 0), z_dir=(0, 1, 0))):
        with Locations((85.53434117, -3.596714528)):
            Rectangle(SKETCH18_W, SKETCH18_H)
    extrude(amount=-CUT_EXTRUDE11_DEPTH, mode=Mode.SUBTRACT)


solid = part.part
